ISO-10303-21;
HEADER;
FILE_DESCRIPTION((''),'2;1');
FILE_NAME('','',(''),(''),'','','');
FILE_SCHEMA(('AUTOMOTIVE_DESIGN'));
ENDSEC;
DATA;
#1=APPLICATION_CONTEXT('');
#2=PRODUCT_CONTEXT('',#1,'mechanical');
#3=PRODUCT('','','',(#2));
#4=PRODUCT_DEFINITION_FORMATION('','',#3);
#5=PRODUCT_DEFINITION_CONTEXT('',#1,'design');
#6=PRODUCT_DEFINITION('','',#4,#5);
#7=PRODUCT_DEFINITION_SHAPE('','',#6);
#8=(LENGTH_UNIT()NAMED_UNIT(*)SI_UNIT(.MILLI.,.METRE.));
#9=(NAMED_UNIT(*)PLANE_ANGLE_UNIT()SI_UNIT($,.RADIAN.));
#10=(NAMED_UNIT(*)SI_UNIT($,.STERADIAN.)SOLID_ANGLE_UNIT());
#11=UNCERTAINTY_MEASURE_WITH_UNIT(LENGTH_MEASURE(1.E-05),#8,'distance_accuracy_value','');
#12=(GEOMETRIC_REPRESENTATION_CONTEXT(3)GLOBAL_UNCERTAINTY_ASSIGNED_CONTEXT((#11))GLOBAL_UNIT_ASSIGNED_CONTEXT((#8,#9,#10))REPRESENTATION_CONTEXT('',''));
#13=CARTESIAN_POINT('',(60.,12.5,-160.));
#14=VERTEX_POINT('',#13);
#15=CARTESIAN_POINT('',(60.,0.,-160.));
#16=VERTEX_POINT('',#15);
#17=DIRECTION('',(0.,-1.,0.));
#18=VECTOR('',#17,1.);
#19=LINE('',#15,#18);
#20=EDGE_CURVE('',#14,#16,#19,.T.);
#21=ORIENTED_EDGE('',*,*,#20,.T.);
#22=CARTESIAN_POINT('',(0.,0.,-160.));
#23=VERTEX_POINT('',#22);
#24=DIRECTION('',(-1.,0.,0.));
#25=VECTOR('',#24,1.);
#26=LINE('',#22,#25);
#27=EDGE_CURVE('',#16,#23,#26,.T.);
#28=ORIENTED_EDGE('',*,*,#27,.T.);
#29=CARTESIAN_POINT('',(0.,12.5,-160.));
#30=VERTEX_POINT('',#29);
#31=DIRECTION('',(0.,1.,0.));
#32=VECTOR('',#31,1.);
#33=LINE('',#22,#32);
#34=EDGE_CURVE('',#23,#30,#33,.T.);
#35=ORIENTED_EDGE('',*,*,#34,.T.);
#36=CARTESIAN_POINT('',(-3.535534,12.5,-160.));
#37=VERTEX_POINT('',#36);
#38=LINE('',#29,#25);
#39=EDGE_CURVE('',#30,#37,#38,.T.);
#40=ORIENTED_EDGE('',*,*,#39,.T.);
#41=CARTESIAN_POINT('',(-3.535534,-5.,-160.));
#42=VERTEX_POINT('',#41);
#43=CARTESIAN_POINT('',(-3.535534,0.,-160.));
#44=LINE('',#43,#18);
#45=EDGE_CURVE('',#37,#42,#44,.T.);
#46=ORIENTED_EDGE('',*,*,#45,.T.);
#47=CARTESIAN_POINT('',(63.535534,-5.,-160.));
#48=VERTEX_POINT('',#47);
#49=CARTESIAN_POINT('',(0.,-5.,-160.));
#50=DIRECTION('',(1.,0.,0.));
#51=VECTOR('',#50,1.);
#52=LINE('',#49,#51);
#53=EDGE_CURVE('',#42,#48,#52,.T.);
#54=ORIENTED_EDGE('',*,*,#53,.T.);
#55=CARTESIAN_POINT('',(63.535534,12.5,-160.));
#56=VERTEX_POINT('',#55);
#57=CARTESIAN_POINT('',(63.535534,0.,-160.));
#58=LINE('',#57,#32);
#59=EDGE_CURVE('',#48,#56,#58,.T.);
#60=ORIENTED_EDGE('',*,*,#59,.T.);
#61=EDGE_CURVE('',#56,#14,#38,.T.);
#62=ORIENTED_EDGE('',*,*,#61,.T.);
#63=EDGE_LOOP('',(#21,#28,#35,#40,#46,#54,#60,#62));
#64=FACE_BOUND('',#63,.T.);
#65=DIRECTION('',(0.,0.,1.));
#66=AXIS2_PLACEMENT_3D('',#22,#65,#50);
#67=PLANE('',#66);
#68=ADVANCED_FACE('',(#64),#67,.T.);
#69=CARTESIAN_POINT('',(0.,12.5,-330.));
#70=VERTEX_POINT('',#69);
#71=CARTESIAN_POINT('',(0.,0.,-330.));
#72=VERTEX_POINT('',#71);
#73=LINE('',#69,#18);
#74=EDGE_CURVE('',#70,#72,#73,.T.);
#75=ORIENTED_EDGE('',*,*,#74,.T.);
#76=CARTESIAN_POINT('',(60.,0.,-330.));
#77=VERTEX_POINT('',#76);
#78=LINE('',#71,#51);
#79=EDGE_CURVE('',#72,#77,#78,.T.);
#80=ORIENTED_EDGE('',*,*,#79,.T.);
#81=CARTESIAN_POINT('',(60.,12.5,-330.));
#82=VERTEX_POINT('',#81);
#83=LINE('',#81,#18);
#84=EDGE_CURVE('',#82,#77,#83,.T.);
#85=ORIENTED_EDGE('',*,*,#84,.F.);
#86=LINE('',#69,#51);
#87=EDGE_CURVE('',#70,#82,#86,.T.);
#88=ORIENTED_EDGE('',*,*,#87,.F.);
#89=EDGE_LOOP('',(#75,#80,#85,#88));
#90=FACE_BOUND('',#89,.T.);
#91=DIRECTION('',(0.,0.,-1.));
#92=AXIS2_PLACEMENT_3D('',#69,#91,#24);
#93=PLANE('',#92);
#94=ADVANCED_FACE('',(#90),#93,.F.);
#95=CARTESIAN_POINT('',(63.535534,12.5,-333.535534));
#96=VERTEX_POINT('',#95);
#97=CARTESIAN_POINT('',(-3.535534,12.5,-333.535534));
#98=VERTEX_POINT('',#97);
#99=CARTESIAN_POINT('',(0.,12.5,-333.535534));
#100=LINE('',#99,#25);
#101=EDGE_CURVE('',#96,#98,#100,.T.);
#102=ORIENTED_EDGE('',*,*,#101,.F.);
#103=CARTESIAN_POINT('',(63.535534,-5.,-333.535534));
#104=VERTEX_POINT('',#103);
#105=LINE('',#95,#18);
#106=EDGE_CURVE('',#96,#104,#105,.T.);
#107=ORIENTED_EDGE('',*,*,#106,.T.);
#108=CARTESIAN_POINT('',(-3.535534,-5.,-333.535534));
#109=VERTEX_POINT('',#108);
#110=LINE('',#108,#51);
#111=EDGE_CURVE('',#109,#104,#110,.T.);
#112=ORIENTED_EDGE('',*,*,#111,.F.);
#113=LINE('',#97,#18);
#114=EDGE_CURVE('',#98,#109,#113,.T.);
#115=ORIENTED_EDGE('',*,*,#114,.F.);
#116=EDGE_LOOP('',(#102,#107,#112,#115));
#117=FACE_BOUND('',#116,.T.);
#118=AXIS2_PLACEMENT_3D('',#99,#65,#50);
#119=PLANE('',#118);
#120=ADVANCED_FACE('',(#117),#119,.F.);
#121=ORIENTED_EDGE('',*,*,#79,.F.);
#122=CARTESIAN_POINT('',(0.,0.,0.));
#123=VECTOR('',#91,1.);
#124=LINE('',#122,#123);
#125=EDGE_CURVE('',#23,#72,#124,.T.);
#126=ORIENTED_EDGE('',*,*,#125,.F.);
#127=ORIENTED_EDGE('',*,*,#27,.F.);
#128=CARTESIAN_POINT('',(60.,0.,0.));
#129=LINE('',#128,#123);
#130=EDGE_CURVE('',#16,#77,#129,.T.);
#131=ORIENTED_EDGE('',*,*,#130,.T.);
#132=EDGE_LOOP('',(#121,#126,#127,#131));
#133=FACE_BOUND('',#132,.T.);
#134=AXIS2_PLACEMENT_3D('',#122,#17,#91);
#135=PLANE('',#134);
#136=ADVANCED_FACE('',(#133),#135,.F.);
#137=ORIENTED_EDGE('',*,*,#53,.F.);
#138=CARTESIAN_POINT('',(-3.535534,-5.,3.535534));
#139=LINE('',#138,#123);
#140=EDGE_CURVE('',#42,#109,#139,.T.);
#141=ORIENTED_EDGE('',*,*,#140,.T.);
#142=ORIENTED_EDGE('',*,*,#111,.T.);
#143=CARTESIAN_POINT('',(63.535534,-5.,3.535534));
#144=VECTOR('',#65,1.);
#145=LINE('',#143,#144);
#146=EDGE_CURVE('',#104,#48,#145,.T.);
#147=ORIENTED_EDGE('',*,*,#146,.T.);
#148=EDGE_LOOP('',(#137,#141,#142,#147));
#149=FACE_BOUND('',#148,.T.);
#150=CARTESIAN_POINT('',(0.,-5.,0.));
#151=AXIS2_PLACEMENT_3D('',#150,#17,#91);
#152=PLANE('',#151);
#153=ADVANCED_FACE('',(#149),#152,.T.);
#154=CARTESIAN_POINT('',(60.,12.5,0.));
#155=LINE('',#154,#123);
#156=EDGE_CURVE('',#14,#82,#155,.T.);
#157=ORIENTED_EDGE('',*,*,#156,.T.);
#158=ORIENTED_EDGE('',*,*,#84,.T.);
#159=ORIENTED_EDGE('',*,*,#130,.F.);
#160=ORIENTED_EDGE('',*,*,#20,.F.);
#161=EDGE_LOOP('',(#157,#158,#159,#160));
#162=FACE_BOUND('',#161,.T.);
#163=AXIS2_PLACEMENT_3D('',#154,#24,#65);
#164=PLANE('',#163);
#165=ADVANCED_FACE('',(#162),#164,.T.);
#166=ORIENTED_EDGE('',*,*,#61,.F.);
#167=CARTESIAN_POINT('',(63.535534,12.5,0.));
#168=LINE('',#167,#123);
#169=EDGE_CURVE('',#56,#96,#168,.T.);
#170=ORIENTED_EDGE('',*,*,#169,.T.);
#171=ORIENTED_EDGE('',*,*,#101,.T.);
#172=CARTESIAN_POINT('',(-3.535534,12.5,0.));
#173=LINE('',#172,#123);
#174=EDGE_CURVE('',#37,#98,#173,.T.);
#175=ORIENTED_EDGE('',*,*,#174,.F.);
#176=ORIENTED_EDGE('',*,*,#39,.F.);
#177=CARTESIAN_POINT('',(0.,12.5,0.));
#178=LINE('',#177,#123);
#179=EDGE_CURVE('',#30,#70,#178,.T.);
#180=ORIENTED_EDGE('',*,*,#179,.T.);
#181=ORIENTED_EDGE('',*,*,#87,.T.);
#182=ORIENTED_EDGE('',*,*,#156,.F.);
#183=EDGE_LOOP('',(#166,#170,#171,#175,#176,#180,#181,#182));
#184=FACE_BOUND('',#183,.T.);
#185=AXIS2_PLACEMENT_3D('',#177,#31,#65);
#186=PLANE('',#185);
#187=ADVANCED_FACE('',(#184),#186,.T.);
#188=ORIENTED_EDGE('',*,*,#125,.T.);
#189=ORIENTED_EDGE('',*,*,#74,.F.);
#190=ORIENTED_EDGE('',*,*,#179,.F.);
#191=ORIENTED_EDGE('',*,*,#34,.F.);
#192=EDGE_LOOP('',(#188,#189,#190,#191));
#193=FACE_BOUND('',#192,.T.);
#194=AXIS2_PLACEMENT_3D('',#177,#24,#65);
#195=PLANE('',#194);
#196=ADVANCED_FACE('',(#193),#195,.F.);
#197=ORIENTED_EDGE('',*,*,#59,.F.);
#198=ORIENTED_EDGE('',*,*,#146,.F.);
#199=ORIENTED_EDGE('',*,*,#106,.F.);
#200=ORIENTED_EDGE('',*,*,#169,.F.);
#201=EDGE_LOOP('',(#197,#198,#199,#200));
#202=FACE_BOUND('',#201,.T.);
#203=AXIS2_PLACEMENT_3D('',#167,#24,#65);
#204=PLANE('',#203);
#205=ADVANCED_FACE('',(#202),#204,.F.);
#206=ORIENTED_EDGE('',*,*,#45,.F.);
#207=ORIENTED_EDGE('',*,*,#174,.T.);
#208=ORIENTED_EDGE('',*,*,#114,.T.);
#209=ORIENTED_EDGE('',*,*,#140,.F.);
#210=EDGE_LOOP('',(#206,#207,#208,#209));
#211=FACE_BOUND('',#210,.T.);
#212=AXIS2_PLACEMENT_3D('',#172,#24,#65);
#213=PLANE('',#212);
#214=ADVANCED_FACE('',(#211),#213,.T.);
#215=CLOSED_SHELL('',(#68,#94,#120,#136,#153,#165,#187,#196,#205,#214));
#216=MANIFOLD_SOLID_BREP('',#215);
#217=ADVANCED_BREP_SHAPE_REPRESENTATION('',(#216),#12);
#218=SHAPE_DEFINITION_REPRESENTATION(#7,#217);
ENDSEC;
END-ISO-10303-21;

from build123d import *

# Parameters (mm, degrees)
SKETCH2_W             = 67.071067812
SKETCH2_H             = 337.071067812
SKETCH2_W_2           = 60
SKETCH2_H_2           = 330
BOSS_EXTRUDE1_DEPTH   = 12.5
SKETCH3_W             = 67.071067812
SKETCH3_H             = 337.071067812
BOSS_EXTRUDE2_DEPTH   = 5
BODY_MOVE_COPY2_ANGLE = 180
BOSS_EXTRUDE3_DEPTH   = 5


with BuildPart() as part:
    # Sketch2 → Boss-Extrude1 (new body)
    with BuildSketch(Plane(origin=(0, 0, 0), x_dir=(1, 0, 0), z_dir=(0, 1, 0))):
        with Locations((30, 165)):
            Rectangle(SKETCH2_W, SKETCH2_H)
        with Locations((30, 165)):
            Rectangle(SKETCH2_W_2, SKETCH2_H_2, mode=Mode.SUBTRACT)
    extrude(amount=BOSS_EXTRUDE1_DEPTH)

    # Sketch3 → Boss-Extrude2 (add)
    with BuildSketch(Plane.XZ):
        with Locations((30, -165)):
            Rectangle(SKETCH3_W, SKETCH3_H)
    extrude(amount=BOSS_EXTRUDE2_DEPTH)


with BuildPart() as body_2:
    # Split1: the piece on the far side of the plane
    add(part.part)
    split(bisect_by=Plane(origin=(0, 0, -165), x_dir=(-1, 0, 0), z_dir=(0, 0, -1)), keep=Keep.BOTTOM)


with BuildPart() as part_1:
    add(part.part)

    # Split1
    split(bisect_by=Plane(origin=(0, 0, -165), x_dir=(-1, 0, 0), z_dir=(0, 0, -1)), keep=Keep.TOP)

    # Sketch4 → Boss-Extrude3 (add)
    with BuildSketch(Plane.XY.offset(-165)):
        Polygon((60, 0), (0, 0), (0, 12.5), (-3.535533906, 12.5), (-3.535533906, -5), (63.535533906, -5), (63.535533906, 12.5), (60, 12.5), align=None)
    extrude(amount=BOSS_EXTRUDE3_DEPTH)


with BuildPart() as body_2_1:
    # Body-Move/Copy2: read off the stored shape, not the designer's step
    # Body-Move/Copy2: moved
    add(body_2.part.moved(Location((-127.0710678, -25, 0))).rotate(Axis((0, 0, 0), (0, 0, 1)), BODY_MOVE_COPY2_ANGLE))


solid = part_1.part
